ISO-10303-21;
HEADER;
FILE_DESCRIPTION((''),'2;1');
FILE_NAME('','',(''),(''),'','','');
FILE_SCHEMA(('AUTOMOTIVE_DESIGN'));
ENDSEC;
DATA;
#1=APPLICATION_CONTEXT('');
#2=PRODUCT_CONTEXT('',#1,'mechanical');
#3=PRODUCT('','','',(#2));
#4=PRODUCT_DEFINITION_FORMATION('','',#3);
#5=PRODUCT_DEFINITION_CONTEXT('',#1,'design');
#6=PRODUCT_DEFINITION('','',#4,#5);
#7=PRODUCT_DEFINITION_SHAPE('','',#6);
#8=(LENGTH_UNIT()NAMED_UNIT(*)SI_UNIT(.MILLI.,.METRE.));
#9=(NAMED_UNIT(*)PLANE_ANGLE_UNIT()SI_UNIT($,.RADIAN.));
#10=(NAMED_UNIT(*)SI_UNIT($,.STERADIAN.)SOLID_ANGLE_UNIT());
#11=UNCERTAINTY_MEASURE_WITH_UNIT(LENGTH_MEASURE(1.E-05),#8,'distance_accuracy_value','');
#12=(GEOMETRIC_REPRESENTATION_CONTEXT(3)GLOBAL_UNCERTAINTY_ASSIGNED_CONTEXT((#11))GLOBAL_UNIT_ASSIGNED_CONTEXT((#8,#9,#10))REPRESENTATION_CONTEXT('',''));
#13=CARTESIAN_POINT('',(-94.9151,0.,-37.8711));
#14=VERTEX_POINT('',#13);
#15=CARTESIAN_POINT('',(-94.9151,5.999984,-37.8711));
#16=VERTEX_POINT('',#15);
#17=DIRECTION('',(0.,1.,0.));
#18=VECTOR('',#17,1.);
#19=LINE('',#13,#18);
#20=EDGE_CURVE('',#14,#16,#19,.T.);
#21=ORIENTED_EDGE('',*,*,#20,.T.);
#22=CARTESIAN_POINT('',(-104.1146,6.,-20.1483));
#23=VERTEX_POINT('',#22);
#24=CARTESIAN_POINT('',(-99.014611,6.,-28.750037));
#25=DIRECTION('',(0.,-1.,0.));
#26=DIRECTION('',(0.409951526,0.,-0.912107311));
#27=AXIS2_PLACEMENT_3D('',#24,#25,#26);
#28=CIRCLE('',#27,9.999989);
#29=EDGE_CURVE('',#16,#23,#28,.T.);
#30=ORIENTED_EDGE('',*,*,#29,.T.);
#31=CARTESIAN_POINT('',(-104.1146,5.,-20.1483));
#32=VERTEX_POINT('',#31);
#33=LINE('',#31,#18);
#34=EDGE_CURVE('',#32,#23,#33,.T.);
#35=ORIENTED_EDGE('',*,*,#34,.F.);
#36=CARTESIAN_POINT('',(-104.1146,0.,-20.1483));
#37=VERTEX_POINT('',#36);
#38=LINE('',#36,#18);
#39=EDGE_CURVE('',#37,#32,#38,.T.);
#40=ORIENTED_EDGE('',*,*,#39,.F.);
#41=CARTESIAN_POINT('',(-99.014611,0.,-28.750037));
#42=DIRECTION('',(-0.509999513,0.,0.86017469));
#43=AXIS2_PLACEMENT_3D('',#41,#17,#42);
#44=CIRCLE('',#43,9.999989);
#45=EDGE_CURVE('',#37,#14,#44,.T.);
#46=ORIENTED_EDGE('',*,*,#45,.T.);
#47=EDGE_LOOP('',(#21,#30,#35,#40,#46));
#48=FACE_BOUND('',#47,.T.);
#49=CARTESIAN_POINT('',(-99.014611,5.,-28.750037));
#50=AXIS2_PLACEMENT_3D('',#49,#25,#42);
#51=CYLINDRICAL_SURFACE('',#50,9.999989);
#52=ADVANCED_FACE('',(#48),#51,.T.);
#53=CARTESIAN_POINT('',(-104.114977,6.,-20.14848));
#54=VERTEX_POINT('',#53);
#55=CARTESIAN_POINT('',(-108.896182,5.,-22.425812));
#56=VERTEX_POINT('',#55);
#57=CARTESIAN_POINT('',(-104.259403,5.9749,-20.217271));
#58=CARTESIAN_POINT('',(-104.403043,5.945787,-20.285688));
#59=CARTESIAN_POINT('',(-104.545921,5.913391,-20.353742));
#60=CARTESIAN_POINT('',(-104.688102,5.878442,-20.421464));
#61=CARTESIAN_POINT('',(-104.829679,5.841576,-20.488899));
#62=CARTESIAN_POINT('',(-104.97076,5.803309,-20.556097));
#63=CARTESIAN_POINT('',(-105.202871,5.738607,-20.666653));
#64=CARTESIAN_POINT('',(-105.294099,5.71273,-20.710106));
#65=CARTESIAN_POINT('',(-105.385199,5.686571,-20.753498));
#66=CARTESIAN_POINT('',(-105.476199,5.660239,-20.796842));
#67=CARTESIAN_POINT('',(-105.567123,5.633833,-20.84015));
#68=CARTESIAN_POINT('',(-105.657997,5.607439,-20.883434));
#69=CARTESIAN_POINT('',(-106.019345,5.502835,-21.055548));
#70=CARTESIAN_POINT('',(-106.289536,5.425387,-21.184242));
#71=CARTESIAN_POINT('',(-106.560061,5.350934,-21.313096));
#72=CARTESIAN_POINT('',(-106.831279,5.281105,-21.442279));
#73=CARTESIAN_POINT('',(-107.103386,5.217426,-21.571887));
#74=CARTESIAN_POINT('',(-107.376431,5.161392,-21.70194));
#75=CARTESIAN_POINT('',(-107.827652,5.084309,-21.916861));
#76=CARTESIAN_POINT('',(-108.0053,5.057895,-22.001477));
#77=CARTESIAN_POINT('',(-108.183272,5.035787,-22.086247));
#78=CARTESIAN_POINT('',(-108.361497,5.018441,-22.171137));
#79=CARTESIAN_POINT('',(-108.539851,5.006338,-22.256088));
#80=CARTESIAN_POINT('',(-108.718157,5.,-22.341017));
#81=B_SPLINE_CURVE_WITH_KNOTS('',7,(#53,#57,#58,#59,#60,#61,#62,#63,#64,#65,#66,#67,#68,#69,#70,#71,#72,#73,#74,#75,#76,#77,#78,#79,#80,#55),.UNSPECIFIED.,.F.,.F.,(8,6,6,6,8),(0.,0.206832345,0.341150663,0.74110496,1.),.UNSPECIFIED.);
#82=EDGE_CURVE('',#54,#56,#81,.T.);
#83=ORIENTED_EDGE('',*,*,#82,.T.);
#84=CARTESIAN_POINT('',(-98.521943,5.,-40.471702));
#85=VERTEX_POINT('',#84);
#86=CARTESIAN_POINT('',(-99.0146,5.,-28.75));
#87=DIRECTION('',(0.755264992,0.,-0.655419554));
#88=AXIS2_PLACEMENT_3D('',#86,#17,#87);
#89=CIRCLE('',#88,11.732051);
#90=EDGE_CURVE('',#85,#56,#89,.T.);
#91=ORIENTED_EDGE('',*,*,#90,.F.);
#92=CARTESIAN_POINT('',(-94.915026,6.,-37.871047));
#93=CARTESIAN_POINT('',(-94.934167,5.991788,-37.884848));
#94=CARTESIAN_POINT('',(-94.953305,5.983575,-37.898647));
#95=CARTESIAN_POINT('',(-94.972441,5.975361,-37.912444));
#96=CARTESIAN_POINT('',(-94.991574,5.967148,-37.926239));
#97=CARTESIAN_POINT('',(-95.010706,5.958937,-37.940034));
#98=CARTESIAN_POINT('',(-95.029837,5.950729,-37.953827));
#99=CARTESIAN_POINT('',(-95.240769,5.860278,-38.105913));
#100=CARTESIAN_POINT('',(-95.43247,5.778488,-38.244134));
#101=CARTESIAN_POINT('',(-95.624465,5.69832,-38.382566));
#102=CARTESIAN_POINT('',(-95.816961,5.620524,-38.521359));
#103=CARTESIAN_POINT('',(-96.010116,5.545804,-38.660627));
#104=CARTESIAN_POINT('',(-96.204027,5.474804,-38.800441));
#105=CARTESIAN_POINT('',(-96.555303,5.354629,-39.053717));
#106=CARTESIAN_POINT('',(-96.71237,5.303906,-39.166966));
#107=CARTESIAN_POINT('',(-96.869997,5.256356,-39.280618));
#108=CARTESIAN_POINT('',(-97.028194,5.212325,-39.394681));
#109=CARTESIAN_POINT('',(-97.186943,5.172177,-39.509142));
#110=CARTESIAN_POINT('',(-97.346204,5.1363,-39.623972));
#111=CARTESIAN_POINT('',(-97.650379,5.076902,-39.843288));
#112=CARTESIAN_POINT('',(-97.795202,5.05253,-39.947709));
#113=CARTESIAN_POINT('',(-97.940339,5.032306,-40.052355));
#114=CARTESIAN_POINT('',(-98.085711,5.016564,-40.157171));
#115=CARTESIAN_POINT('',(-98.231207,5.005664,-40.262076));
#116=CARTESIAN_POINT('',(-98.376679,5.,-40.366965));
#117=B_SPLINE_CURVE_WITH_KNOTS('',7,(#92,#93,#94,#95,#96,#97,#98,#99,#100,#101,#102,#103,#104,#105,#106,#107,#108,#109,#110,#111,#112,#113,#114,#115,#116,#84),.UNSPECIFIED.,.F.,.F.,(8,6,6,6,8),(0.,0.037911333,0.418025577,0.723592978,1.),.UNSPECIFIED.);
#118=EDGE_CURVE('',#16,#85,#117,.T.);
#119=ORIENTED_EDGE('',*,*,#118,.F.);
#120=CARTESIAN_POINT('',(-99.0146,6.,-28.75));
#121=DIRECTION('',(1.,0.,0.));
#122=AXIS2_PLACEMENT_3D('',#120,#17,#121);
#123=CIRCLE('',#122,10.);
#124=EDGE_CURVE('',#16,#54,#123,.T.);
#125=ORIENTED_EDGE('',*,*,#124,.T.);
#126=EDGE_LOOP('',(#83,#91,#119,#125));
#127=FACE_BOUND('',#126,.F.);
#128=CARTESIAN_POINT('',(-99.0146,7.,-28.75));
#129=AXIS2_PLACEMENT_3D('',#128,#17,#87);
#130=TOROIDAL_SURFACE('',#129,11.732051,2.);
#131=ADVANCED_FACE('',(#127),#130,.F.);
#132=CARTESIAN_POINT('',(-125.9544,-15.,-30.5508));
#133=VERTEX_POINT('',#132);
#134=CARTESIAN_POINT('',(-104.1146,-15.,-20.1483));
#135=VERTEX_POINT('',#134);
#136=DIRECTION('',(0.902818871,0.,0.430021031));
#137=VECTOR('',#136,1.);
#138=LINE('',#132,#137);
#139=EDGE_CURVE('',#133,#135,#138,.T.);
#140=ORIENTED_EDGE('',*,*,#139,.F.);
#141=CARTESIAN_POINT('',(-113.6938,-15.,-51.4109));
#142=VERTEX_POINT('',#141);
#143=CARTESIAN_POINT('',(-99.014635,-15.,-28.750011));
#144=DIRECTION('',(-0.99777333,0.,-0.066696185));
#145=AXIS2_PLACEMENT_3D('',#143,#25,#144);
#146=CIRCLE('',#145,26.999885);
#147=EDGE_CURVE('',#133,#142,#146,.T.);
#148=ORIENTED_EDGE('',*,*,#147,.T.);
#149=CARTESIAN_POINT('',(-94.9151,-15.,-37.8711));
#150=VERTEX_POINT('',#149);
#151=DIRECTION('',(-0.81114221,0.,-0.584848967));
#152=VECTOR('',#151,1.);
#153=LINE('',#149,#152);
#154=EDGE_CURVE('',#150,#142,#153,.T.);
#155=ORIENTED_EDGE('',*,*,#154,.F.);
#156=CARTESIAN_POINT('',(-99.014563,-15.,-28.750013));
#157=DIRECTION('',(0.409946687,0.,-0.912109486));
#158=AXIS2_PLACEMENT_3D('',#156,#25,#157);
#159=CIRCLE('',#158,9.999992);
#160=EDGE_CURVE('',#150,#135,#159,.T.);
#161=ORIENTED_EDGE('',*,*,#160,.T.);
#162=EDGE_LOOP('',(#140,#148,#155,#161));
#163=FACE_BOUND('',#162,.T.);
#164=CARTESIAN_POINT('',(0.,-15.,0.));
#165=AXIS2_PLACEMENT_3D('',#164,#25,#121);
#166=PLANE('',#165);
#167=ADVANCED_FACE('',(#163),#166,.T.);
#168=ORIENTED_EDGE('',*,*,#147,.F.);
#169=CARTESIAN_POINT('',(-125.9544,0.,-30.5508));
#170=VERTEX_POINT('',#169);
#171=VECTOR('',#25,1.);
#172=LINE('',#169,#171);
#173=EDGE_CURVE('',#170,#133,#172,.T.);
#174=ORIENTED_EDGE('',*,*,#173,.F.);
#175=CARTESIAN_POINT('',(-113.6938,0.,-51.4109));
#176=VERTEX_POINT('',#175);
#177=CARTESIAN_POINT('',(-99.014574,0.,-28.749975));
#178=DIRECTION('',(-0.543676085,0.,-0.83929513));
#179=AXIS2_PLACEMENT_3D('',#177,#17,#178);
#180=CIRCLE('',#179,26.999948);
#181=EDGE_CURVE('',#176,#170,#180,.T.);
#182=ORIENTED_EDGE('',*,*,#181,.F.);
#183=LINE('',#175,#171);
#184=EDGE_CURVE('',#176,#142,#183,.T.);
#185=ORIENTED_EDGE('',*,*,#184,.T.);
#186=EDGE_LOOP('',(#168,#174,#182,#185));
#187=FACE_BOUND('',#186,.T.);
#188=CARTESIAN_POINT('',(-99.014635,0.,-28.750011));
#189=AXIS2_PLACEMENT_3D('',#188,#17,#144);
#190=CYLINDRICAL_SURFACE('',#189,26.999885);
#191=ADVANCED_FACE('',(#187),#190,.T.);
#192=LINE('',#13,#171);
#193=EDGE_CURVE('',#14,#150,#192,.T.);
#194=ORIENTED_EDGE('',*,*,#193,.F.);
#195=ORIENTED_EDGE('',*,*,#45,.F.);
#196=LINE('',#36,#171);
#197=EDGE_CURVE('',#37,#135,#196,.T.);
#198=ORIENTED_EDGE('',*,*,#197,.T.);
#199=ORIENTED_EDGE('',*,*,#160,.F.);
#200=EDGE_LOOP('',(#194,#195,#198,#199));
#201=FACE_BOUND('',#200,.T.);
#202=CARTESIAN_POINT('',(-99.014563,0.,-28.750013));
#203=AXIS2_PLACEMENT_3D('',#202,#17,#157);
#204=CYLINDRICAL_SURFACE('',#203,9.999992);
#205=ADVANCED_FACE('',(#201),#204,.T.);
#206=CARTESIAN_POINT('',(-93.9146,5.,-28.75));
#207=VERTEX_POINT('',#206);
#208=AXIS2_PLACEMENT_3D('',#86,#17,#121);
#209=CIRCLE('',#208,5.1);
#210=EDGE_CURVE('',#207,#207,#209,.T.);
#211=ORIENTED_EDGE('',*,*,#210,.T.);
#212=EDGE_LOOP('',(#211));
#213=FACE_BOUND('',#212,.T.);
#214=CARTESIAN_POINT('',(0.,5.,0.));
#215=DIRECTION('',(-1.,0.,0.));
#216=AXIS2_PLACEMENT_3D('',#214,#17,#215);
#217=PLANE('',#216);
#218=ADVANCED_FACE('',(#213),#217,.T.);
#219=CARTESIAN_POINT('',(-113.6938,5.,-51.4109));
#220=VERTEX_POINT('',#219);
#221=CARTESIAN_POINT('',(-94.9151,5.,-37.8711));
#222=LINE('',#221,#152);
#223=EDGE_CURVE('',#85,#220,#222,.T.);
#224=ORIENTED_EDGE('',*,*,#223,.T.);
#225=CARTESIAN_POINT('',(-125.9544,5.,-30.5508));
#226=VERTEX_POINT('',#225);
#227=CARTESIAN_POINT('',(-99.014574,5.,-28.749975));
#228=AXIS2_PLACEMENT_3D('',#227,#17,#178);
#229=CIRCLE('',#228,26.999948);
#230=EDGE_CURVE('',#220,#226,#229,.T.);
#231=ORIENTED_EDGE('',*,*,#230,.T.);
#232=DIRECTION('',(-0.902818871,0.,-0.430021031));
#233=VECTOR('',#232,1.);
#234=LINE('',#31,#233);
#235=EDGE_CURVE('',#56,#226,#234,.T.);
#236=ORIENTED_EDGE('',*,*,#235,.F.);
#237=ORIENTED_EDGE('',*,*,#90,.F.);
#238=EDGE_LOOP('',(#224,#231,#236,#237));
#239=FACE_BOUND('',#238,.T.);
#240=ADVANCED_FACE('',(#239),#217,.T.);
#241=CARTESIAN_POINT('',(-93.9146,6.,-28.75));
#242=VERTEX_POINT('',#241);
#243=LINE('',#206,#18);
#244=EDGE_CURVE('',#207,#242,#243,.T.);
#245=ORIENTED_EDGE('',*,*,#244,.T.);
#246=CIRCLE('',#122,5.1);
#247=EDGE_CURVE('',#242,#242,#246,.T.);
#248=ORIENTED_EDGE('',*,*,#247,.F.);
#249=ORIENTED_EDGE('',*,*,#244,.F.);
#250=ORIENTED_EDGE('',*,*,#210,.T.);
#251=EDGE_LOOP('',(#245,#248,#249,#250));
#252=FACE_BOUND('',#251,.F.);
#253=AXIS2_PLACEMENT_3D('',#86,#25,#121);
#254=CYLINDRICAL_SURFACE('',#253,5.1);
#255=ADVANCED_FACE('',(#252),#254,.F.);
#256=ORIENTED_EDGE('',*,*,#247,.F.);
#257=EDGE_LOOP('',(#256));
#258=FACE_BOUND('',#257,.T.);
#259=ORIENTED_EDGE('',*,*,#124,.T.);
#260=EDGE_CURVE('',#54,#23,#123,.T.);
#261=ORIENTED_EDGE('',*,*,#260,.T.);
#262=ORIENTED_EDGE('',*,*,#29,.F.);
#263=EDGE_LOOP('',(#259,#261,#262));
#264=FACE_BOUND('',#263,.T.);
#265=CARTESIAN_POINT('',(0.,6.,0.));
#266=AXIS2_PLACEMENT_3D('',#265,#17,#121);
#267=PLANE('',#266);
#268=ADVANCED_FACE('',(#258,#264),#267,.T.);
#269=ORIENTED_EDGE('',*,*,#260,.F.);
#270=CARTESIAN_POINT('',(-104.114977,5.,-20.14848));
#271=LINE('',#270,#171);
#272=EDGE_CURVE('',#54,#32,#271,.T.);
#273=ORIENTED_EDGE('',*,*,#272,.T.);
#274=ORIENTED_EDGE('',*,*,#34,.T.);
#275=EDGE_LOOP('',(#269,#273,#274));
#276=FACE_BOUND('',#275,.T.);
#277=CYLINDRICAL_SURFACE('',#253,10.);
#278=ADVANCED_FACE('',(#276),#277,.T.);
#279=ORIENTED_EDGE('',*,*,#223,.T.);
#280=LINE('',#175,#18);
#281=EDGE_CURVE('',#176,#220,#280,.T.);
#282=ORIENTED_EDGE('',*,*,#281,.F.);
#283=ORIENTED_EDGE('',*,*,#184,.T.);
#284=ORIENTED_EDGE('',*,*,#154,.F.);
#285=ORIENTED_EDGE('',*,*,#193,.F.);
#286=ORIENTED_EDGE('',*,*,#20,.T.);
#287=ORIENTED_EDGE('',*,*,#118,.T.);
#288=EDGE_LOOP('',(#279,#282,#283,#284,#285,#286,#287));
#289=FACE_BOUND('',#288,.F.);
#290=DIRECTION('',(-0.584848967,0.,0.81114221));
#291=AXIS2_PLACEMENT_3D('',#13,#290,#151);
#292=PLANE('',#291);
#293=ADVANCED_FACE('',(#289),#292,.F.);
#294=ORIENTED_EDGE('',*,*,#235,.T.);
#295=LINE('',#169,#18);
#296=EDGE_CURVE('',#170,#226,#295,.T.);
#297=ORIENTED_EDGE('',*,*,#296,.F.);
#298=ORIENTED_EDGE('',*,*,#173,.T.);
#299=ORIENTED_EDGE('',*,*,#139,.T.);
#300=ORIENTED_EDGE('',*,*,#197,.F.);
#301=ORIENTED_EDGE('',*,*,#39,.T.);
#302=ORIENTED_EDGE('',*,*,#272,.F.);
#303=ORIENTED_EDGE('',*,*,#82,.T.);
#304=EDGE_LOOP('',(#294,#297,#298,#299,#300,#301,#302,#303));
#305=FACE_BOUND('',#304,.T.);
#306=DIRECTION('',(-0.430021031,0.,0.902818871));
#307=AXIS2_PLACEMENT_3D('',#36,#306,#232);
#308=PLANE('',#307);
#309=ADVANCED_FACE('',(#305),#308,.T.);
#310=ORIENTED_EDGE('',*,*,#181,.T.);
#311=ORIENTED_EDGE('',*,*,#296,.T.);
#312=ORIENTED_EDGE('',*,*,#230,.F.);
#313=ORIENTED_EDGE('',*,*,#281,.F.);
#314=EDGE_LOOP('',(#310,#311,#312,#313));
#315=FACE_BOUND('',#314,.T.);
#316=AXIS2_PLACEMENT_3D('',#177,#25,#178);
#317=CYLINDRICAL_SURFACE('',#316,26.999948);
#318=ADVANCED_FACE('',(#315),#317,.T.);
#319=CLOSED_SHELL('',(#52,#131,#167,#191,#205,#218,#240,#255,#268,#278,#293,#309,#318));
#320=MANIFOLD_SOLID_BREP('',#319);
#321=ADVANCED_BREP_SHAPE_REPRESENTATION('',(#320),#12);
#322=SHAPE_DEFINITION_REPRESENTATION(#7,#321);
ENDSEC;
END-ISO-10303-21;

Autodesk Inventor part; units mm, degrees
ref_plane "YZ Plane" through (0, 0, 0) normal (1, 0, 0) x (0, 1, 0)
ref_plane "XZ Plane" through (0, 0, 0) normal (0, 1, 0) x (-1, 0, 0)
ref_plane "XY Plane" through (0, 0, 0) normal (0, 0, 1) x (1, 0, 0)
sketch "Szkic1" plane through (0, 0, 0) normal (0, 1, 0) x (-1, 0, 0)
  line L0 (-125.2393, -14.1807) -> (-26.2247, 164.0455)
  arc A0 (-125.2393, -14.1807) -> (-99.0146, -58.75) centre (-99.0146, -28.75) ccw
  line L1 (99.0146, -58.75) -> (-99.0146, -58.75)
  line L2 (26.2247, 164.0455) -> (125.2393, -14.1807)
  arc A1 (26.2247, 164.0455) -> (-26.2247, 164.0455) centre (0, 149.4762) ccw
  line L3 (-23.6022, 162.5886) -> (-122.6168, -15.6376)
  arc A2 (-122.6168, -15.6376) -> (-99.0146, -55.75) centre (-99.0146, -28.75) ccw
  line L4 (-99.0146, -55.75) -> (99.0146, -55.75)
  arc A3 (113.6938, -51.4109) -> (125.9544, -30.5508) centre (99.0146, -28.75) ccw
  line L5 (122.6168, -15.6376) -> (23.6022, 162.5886)
  arc A4 (23.6022, 162.5886) -> (-23.6022, 162.5886) centre (0, 149.4762) ccw
  circle A5 centre (99.0146, -28.75) radius 5.1
  arc A6 (104.1146, -20.1483) -> (94.9151, -37.8711) centre (99.0146, -28.75) ccw
  line L6 (104.1146, -20.1483) -> (125.9544, -30.5508)
  line L7 (94.9151, -37.8711) -> (113.6938, -51.4109)
  arc A7 (99.0146, -58.75) -> (116.2857, -53.2797) centre (99.0146, -28.75) ccw
  arc A8 (128.8458, -31.9279) -> (125.2393, -14.1807) centre (99.0146, -28.75) ccw
  point P0 (0, 0)
  point P1 (0, 0)
  dimension "d0" = 3
  dimension "d1" = 10.2
  dimension "d2" = 20
extrude "Wyciągnięcie proste1" add sketch "Szkic1" along normal blind 5
sketch "Szkic2" plane through (0, 5, 0) normal (0, 1, 0) x (1, 0, 0)
  circle A0 centre (-99.0146, 28.75) radius 5.1 projected
  circle A1 centre (-99.0146, 28.75) radius 5.1
  point P0 (0, 0)
extrude "Wyciągnięcie proste2" add sketch "Szkic2" against normal blind 5
sketch "Szkic3" plane through (0, 5, 0) normal (0, 1, 0) x (1, 0, 0)
  arc A0 (-104.1146, 20.1483) -> (-94.9151, 37.8711) centre (-99.0146, 28.75) ccw projected
  circle A1 centre (-99.0146, 28.75) radius 5.1
  circle A2 centre (-99.0146, 28.75) radius 10
  point P0 (0, 0)
  point P1 (-94.9151, 37.8711)
  dimension "d7" = 10.2
extrude "Wyciągnięcie proste3" add sketch "Szkic3" along normal blind 1
fillet "Zaokrąglenie1" radius 2 1 edges at (-107.8901, 5, -33.357)
sketch "Szkic4" plane through (0, 0, 0) normal (0, -1, 0) x (1, 0, 0)
  line L0 (-94.9151, -37.8711) -> (-113.6938, -51.4109) projected
  arc A0 (-94.9151, -37.8711) -> (-104.1146, -20.1483) centre (-99.0146, -28.75) ccw projected
  line L1 (-125.9544, -30.5508) -> (-104.1146, -20.1483) projected
  arc A1 (-125.9544, -30.5508) -> (-113.6938, -51.4109) centre (-99.0146, -28.75) ccw projected
  point P0 (0, 0)
extrude "Wyciągnięcie proste4" add sketch "Szkic4" along normal blind 15
properties part number "_Drukowanie 3D"
